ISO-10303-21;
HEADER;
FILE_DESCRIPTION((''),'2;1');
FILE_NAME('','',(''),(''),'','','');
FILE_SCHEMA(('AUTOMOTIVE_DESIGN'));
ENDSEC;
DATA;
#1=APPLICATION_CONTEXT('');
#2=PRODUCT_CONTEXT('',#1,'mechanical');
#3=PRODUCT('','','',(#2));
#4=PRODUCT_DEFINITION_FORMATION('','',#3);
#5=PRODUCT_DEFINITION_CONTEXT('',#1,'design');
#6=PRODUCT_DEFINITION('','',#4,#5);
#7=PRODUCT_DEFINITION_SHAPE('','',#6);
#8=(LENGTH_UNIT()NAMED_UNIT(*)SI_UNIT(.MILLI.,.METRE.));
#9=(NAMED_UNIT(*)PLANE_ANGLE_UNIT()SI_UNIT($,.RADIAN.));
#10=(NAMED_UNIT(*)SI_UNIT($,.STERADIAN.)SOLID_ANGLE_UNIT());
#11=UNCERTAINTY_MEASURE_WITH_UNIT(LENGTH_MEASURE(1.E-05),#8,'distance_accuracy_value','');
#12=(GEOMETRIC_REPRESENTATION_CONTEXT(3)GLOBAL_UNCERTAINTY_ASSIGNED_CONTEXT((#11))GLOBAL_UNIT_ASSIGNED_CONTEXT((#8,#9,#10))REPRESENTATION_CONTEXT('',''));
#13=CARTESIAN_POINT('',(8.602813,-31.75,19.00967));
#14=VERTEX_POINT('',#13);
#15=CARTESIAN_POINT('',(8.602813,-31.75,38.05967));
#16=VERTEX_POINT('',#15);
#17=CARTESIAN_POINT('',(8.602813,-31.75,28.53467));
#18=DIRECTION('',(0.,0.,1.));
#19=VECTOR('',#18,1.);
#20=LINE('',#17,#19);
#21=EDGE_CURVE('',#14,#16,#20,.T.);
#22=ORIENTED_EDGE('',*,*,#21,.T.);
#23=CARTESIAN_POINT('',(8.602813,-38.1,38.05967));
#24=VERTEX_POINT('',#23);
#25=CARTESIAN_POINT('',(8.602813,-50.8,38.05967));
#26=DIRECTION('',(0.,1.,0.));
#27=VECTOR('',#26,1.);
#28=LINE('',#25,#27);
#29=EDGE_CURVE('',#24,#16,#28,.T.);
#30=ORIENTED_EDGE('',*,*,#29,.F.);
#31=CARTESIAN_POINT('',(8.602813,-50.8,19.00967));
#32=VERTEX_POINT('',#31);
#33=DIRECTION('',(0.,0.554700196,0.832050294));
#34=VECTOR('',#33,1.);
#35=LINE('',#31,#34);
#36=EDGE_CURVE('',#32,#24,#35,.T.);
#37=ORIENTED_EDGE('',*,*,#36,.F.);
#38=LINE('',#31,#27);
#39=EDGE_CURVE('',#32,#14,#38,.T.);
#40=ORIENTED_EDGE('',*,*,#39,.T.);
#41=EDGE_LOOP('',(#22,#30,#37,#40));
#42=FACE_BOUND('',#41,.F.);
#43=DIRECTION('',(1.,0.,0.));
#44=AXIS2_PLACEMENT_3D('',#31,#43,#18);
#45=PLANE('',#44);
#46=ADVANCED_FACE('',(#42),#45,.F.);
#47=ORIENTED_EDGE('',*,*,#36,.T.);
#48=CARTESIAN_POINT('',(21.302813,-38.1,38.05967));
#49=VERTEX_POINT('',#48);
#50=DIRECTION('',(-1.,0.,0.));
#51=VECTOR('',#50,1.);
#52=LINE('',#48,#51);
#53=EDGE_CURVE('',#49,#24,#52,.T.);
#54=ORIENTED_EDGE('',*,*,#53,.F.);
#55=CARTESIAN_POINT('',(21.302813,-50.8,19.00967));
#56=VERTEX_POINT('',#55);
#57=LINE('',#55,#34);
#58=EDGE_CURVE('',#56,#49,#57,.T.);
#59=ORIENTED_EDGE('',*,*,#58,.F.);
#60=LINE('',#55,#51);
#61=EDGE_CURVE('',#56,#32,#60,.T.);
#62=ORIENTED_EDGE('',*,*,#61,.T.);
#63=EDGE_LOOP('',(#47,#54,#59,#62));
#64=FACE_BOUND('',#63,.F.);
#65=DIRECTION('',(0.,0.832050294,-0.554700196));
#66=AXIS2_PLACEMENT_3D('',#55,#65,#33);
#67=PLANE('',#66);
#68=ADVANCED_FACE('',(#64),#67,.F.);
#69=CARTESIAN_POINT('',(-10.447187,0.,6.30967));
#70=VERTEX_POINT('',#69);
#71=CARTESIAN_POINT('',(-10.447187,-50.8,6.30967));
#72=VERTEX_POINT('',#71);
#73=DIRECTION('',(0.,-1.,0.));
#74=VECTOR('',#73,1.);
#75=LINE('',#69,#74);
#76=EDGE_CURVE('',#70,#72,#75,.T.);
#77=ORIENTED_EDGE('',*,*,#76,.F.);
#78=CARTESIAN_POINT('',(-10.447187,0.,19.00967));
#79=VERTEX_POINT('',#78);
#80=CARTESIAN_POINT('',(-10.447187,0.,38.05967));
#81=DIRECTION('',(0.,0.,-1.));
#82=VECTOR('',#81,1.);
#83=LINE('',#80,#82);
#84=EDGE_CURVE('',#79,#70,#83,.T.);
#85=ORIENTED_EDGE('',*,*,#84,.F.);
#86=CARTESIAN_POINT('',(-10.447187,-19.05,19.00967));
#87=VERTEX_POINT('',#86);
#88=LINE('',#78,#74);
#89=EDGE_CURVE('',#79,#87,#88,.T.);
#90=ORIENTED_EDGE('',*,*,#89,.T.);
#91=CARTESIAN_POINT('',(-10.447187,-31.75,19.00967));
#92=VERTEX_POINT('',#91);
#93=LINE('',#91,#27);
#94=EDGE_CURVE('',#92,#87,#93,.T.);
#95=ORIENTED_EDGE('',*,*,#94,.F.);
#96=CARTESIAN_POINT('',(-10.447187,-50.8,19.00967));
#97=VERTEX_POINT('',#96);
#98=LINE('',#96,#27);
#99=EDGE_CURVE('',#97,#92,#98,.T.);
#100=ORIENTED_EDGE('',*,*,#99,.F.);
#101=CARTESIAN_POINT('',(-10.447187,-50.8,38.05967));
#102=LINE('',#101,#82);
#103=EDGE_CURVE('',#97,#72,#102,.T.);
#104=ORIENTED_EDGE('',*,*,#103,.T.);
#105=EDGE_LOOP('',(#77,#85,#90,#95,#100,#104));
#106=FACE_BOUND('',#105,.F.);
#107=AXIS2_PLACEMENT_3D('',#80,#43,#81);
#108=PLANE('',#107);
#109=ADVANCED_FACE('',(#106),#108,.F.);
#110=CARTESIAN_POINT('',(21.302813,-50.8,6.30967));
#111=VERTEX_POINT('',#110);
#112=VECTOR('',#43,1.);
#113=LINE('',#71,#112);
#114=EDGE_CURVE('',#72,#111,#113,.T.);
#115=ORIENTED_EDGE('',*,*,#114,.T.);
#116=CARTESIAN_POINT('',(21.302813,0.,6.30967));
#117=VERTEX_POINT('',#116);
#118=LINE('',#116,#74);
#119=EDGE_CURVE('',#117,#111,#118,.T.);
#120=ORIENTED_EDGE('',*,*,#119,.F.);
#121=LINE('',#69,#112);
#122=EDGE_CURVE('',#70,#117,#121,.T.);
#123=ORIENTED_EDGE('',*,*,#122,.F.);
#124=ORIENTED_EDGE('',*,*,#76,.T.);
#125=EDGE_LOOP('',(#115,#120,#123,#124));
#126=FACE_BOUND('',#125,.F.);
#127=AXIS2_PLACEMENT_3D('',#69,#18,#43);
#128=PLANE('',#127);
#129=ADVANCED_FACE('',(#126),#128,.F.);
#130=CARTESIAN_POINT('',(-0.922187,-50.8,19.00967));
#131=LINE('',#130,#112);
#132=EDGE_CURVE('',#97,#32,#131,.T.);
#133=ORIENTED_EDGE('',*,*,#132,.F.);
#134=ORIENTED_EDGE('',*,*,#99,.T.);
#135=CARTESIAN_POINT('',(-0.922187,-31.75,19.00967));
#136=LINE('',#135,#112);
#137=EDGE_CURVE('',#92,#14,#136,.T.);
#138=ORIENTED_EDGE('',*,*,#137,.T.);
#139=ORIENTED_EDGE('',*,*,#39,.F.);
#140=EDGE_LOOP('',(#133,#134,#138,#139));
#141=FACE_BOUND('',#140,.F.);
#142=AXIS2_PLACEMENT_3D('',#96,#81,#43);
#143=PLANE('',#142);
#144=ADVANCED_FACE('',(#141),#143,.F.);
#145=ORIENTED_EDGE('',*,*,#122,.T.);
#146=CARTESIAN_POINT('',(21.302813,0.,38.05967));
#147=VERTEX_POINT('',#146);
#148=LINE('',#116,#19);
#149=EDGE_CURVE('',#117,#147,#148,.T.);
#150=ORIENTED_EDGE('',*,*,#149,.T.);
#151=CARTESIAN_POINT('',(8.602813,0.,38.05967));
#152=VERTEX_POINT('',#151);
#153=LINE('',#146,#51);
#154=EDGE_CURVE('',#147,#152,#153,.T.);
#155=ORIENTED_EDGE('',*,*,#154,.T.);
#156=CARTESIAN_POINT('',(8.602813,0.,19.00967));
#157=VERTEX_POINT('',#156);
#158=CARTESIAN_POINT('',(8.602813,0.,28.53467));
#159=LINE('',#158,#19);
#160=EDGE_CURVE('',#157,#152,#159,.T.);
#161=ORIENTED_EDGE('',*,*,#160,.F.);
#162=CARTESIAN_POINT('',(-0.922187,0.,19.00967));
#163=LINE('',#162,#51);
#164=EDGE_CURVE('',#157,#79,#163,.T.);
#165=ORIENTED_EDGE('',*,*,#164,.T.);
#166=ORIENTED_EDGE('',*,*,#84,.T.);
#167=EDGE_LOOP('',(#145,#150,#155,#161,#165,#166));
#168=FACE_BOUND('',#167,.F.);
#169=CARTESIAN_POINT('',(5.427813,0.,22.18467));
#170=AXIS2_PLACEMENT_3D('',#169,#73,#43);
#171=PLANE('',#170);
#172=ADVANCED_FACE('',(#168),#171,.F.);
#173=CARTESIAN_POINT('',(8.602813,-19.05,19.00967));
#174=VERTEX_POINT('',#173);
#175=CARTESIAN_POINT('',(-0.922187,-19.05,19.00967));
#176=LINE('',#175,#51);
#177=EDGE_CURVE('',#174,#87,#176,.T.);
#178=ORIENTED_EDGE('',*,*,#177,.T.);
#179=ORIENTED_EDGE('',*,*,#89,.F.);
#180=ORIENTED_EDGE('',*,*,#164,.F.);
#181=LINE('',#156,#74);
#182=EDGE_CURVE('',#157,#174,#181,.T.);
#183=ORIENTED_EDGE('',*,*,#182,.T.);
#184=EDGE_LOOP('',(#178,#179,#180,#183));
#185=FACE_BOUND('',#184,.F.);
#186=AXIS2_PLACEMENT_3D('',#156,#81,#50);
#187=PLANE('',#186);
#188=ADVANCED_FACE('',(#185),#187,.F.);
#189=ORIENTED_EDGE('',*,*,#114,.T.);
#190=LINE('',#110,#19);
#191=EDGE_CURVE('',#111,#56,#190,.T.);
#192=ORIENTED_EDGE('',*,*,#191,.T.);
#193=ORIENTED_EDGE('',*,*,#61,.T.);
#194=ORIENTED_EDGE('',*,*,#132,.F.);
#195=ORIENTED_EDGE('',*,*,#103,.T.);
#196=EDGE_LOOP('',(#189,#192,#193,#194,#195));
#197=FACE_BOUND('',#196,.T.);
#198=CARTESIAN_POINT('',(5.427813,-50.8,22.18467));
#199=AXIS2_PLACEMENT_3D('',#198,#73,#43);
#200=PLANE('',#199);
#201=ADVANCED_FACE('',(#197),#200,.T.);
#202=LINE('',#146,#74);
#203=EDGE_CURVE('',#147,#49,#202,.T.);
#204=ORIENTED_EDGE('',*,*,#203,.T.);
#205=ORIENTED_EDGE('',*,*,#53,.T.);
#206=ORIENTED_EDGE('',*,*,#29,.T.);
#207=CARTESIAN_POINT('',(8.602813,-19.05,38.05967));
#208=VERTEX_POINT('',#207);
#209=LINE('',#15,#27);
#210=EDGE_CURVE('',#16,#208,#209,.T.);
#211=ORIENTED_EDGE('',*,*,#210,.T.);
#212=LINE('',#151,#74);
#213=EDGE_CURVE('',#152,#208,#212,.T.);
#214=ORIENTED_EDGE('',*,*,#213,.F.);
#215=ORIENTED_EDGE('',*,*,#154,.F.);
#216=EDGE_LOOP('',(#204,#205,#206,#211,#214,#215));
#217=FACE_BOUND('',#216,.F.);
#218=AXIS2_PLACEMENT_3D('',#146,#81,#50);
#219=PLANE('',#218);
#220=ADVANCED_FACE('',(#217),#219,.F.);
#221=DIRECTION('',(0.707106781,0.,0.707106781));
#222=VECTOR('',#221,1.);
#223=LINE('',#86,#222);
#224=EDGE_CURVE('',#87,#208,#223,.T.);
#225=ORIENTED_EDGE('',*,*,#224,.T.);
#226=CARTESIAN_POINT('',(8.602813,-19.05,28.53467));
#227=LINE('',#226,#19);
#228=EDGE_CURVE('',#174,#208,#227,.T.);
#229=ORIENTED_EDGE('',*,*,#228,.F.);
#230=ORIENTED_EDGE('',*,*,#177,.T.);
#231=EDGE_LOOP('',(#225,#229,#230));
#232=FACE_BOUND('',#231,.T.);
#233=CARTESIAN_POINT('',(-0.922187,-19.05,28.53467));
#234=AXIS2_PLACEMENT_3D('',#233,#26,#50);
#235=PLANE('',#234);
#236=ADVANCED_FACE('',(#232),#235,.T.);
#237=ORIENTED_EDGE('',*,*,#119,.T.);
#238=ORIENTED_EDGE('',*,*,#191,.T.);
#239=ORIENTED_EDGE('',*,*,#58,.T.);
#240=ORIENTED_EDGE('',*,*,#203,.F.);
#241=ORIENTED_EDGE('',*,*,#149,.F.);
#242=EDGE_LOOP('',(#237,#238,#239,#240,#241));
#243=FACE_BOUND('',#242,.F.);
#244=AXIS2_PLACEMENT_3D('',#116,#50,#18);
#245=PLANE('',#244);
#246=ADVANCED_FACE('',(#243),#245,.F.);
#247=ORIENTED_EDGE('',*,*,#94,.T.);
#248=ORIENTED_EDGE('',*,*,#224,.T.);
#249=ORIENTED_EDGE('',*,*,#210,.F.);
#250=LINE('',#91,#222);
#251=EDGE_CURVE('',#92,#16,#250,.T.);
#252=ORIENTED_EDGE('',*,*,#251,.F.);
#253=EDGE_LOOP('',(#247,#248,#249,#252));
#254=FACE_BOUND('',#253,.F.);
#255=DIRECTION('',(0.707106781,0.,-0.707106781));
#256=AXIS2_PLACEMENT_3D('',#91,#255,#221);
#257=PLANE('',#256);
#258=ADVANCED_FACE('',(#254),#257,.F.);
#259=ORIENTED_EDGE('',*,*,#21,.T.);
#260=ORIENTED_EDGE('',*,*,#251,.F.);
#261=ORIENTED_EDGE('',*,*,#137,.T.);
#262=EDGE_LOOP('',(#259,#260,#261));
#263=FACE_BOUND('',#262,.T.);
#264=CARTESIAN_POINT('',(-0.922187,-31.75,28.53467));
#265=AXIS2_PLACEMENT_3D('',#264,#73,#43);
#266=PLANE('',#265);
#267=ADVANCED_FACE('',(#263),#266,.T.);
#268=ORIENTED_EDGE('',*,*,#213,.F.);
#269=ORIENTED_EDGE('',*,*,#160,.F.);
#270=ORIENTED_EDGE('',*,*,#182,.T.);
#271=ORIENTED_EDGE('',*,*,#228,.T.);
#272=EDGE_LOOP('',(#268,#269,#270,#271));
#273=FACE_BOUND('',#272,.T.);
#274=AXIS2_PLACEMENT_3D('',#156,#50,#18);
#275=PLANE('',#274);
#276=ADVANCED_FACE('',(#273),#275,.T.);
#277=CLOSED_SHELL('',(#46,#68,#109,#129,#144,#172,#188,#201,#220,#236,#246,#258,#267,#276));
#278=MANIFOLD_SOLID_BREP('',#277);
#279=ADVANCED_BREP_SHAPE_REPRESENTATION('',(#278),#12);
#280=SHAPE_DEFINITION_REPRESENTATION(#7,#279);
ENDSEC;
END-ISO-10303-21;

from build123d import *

# Parameters (mm, degrees)
F1_DEPTH = 50.8
F4_DEPTH = 12.7
F2_W     = 19.05
F2_H     = 19.05
F5_DEPTH = 19.05
F7_DEPTH = 12.7
F8_W     = 19.05
F8_H     = 19.05
F9_DEPTH = 19.05


# Not quite as in the source:
# - a feature names something its author has since deleted; it is built from what else it names


with BuildPart() as f1:
    # F0 (on Front) → F1 (new body)
    with BuildSketch(Plane.XZ):
        Polygon((21.3028131574, 38.059670007), (5.7217953451, 38.059670007), (-10.4471868426, 38.059670007), (-10.4471868426, 6.309670007), (21.3028131574, 6.309670007), align=None)
    extrude(amount=F1_DEPTH)

    # F3 (on face) → F4 (cut)
    with BuildSketch(Plane.YZ.offset(21.3028131574)):
        Polygon((-50.8, 38.059670007), (-50.8, 19.009670007), (-38.1, 38.059670007), align=None)
    extrude(amount=-F4_DEPTH, mode=Mode.SUBTRACT)

    # F2 (on face) → F5 (cut)
    with BuildSketch(Plane.XZ.offset(50.8)):
        with Locations((-0.9221868426, 28.534670007)):
            Rectangle(F2_W, F2_H)
    extrude(amount=-F5_DEPTH, mode=Mode.SUBTRACT)

    # F6 (on face) → F7 (cut)
    with BuildSketch(Plane.XZ.offset(31.75)):
        Polygon((-10.4471868426, 19.009670007), (8.6028131574, 38.059670007), (-10.4471868426, 38.059670007), align=None)
    extrude(amount=-F7_DEPTH, mode=Mode.SUBTRACT)

    # F8 (on face) → F9 (cut)
    with BuildSketch(Plane(origin=(0, 0, 0), x_dir=(-1, 0, 0), z_dir=(0, 1, 0))):
        with Locations((0.9221868426, 28.534670007)):
            Rectangle(F8_W, F8_H)
    extrude(amount=-F9_DEPTH, mode=Mode.SUBTRACT)


solid = f1.part
